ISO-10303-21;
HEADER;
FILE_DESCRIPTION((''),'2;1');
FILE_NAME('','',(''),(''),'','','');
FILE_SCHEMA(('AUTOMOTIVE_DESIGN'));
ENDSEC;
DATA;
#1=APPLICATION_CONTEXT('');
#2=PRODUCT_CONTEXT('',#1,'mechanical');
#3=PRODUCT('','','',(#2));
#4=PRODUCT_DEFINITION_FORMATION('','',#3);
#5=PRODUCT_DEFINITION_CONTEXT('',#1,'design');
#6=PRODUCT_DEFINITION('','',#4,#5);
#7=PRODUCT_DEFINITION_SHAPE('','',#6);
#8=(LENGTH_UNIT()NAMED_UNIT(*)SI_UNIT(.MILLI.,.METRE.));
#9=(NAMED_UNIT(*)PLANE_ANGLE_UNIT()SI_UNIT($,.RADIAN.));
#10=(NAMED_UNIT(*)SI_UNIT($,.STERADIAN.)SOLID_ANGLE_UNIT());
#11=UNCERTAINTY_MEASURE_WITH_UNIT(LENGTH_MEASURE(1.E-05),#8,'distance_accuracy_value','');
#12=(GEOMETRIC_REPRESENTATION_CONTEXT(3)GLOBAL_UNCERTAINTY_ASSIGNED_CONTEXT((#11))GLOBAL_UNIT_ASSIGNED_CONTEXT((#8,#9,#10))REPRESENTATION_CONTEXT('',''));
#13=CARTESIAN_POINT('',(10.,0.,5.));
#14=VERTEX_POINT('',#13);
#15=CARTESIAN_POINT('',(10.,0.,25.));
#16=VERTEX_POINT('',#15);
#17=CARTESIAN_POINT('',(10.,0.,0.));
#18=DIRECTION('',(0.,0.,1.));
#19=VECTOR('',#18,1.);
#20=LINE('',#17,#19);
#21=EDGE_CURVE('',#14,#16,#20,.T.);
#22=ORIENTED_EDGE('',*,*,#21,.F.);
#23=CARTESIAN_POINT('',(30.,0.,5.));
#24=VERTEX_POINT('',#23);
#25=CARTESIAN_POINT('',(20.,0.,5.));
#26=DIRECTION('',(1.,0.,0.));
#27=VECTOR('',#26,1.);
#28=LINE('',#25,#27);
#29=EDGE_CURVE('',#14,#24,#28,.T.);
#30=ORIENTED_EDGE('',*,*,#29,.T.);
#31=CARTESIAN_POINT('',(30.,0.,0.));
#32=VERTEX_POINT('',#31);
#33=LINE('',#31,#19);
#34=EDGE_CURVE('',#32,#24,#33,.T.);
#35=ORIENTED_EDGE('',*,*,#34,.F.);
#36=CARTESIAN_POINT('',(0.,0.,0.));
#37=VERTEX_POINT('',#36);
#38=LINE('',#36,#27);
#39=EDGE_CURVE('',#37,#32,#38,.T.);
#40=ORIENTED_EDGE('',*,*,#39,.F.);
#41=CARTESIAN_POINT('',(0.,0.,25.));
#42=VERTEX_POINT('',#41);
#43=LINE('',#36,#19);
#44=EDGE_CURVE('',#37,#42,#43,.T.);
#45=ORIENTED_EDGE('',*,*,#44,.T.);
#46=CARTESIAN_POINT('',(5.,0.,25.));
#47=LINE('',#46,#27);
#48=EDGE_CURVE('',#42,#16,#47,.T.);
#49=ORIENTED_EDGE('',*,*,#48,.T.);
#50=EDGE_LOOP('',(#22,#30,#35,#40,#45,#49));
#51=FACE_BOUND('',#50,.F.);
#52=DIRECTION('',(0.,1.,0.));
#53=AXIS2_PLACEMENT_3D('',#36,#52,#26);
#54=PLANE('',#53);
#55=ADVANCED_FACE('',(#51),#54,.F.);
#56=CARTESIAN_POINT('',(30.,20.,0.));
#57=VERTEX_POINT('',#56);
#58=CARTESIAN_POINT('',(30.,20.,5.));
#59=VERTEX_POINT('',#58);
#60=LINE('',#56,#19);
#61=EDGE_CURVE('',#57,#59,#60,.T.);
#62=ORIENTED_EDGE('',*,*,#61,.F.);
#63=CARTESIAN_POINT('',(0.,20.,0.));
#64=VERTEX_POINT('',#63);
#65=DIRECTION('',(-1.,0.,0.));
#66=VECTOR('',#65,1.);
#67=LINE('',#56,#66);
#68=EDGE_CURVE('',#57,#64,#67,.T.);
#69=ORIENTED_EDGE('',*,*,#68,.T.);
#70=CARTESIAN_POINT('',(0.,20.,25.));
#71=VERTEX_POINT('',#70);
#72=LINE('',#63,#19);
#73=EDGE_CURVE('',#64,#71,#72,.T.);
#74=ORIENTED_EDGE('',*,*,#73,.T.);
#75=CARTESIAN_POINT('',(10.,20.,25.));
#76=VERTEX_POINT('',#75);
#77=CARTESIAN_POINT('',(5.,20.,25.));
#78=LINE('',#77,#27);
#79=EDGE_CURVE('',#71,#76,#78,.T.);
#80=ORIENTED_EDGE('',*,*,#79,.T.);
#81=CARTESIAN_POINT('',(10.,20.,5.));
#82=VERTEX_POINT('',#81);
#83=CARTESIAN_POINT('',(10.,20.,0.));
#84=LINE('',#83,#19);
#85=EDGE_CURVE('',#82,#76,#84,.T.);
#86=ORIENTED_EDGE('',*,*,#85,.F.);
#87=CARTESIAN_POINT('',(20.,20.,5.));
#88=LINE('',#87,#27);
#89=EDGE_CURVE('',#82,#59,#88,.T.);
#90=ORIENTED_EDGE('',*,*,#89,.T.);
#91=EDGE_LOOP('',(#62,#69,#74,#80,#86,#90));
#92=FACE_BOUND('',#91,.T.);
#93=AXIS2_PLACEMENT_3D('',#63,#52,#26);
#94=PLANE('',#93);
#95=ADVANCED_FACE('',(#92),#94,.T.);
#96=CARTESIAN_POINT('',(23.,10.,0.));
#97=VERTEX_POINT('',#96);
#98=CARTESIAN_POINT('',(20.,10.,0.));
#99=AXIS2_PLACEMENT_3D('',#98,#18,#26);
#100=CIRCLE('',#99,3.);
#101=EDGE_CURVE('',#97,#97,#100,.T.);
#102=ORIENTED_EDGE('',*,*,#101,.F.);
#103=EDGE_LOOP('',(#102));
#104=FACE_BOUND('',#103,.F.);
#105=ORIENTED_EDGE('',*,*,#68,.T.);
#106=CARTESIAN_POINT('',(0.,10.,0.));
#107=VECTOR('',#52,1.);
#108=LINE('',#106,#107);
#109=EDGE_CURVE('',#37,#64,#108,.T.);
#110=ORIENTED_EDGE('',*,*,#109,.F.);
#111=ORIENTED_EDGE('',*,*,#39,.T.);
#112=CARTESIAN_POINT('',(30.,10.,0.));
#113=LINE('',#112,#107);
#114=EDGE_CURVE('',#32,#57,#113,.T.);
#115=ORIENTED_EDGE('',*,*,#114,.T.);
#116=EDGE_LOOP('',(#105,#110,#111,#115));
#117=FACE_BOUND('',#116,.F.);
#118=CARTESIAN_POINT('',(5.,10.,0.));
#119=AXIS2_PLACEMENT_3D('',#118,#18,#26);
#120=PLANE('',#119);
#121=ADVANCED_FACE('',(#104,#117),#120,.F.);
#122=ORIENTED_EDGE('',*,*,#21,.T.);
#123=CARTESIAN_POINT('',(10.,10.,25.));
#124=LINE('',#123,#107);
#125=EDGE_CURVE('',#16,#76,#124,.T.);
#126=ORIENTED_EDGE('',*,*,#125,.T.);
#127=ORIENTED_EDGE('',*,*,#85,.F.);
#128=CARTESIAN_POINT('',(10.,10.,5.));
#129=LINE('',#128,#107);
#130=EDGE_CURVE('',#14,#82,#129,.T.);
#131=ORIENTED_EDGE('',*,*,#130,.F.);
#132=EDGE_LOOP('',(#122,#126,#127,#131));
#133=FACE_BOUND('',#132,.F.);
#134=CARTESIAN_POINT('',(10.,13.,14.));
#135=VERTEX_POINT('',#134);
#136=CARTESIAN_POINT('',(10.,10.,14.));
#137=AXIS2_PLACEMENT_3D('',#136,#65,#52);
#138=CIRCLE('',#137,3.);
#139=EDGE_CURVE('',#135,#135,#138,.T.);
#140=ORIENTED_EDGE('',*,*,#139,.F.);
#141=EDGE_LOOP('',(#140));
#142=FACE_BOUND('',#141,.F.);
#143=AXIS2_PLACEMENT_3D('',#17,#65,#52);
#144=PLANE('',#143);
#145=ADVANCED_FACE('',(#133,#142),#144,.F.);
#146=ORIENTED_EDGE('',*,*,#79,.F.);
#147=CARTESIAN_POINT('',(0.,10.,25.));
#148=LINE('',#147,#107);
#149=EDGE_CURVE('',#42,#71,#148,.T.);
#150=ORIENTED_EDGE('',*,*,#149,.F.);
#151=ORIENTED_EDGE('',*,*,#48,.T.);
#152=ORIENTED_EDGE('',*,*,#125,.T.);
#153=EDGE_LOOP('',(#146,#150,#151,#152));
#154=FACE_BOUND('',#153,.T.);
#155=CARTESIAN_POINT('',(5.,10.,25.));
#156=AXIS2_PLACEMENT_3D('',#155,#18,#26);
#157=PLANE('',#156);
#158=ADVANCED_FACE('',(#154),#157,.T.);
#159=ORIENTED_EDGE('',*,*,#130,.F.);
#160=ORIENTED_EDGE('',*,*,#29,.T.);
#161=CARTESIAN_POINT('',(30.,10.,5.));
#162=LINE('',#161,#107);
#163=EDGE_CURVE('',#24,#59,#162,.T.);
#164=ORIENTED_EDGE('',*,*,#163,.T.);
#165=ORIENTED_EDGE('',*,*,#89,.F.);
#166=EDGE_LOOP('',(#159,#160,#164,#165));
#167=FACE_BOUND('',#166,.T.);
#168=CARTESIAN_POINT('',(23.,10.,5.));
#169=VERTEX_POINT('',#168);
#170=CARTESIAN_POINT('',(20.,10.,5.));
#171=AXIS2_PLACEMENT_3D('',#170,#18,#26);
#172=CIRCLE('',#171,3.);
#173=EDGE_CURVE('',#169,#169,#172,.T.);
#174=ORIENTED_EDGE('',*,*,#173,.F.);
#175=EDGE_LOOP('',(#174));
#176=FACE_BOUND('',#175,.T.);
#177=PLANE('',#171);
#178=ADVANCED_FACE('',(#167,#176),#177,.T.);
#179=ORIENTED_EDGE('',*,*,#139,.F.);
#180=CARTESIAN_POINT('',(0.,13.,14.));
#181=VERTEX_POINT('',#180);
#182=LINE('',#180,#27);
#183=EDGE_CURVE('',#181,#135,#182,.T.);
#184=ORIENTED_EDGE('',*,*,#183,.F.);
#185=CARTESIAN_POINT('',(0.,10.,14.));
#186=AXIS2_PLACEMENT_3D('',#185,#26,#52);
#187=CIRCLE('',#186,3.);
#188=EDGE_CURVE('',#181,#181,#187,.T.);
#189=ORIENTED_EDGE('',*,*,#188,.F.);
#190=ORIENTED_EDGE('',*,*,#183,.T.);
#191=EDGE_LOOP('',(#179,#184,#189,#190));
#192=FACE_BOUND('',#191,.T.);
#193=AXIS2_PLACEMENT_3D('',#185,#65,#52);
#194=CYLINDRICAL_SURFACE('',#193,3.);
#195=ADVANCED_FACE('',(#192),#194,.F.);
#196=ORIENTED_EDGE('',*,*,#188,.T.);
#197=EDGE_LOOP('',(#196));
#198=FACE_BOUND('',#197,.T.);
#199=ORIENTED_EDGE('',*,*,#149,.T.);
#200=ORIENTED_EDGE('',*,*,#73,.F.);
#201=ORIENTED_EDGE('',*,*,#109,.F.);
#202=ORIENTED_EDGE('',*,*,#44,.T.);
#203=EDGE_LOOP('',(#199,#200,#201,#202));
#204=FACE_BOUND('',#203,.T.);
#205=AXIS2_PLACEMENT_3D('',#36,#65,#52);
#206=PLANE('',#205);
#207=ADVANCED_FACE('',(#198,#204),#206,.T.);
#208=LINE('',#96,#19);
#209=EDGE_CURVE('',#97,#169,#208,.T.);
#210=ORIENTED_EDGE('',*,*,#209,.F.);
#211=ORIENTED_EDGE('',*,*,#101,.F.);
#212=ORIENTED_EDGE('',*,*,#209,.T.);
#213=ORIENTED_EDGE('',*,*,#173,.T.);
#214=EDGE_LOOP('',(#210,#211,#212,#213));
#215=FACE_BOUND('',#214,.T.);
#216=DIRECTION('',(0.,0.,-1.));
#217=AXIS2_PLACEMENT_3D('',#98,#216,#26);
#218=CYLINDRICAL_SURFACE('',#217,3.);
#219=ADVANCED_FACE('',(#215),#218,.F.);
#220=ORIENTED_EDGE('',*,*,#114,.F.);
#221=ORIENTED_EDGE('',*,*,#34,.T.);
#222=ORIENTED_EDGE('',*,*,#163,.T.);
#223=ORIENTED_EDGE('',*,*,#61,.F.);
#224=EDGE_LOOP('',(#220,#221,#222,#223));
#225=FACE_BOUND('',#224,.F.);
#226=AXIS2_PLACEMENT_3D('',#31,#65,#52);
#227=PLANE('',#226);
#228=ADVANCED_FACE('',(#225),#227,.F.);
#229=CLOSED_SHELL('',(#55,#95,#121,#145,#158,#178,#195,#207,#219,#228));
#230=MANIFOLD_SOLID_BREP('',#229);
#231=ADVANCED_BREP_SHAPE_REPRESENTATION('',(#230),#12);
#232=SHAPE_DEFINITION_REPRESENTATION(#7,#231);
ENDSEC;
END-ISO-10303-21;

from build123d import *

# Parameters (mm, degrees)
F0_W     = 20
F0_H     = 20
F0_R     = 3
F1_DEPTH = 5
F0_W_2   = 10
F2_DEPTH = 25
F3_R     = 3
F4_DEPTH = 25


# Not quite as in the source:
# - a feature names something its author has since deleted; it is built from what else it names


with BuildPart() as f1:
    # F0 (on Top) → F1 (new body)
    with BuildSketch(Plane.XY):
        with Locations((20, 10)):
            Rectangle(F0_W, F0_H)
        with Locations((20, 10)):
            Circle(F0_R, mode=Mode.SUBTRACT)
    extrude(amount=F1_DEPTH)

    # F0 (on Top) → F2 (join)
    with BuildSketch(Plane.XY):
        with Locations((5, 10)):
            Rectangle(F0_W_2, F0_H)
    extrude(amount=F2_DEPTH)

    # F3 (on Right) → F4 (cut)
    with BuildSketch(Plane.YZ):
        with Locations((10, 14)):
            Circle(F3_R)
    extrude(amount=F4_DEPTH, mode=Mode.SUBTRACT)


solid = f1.part
